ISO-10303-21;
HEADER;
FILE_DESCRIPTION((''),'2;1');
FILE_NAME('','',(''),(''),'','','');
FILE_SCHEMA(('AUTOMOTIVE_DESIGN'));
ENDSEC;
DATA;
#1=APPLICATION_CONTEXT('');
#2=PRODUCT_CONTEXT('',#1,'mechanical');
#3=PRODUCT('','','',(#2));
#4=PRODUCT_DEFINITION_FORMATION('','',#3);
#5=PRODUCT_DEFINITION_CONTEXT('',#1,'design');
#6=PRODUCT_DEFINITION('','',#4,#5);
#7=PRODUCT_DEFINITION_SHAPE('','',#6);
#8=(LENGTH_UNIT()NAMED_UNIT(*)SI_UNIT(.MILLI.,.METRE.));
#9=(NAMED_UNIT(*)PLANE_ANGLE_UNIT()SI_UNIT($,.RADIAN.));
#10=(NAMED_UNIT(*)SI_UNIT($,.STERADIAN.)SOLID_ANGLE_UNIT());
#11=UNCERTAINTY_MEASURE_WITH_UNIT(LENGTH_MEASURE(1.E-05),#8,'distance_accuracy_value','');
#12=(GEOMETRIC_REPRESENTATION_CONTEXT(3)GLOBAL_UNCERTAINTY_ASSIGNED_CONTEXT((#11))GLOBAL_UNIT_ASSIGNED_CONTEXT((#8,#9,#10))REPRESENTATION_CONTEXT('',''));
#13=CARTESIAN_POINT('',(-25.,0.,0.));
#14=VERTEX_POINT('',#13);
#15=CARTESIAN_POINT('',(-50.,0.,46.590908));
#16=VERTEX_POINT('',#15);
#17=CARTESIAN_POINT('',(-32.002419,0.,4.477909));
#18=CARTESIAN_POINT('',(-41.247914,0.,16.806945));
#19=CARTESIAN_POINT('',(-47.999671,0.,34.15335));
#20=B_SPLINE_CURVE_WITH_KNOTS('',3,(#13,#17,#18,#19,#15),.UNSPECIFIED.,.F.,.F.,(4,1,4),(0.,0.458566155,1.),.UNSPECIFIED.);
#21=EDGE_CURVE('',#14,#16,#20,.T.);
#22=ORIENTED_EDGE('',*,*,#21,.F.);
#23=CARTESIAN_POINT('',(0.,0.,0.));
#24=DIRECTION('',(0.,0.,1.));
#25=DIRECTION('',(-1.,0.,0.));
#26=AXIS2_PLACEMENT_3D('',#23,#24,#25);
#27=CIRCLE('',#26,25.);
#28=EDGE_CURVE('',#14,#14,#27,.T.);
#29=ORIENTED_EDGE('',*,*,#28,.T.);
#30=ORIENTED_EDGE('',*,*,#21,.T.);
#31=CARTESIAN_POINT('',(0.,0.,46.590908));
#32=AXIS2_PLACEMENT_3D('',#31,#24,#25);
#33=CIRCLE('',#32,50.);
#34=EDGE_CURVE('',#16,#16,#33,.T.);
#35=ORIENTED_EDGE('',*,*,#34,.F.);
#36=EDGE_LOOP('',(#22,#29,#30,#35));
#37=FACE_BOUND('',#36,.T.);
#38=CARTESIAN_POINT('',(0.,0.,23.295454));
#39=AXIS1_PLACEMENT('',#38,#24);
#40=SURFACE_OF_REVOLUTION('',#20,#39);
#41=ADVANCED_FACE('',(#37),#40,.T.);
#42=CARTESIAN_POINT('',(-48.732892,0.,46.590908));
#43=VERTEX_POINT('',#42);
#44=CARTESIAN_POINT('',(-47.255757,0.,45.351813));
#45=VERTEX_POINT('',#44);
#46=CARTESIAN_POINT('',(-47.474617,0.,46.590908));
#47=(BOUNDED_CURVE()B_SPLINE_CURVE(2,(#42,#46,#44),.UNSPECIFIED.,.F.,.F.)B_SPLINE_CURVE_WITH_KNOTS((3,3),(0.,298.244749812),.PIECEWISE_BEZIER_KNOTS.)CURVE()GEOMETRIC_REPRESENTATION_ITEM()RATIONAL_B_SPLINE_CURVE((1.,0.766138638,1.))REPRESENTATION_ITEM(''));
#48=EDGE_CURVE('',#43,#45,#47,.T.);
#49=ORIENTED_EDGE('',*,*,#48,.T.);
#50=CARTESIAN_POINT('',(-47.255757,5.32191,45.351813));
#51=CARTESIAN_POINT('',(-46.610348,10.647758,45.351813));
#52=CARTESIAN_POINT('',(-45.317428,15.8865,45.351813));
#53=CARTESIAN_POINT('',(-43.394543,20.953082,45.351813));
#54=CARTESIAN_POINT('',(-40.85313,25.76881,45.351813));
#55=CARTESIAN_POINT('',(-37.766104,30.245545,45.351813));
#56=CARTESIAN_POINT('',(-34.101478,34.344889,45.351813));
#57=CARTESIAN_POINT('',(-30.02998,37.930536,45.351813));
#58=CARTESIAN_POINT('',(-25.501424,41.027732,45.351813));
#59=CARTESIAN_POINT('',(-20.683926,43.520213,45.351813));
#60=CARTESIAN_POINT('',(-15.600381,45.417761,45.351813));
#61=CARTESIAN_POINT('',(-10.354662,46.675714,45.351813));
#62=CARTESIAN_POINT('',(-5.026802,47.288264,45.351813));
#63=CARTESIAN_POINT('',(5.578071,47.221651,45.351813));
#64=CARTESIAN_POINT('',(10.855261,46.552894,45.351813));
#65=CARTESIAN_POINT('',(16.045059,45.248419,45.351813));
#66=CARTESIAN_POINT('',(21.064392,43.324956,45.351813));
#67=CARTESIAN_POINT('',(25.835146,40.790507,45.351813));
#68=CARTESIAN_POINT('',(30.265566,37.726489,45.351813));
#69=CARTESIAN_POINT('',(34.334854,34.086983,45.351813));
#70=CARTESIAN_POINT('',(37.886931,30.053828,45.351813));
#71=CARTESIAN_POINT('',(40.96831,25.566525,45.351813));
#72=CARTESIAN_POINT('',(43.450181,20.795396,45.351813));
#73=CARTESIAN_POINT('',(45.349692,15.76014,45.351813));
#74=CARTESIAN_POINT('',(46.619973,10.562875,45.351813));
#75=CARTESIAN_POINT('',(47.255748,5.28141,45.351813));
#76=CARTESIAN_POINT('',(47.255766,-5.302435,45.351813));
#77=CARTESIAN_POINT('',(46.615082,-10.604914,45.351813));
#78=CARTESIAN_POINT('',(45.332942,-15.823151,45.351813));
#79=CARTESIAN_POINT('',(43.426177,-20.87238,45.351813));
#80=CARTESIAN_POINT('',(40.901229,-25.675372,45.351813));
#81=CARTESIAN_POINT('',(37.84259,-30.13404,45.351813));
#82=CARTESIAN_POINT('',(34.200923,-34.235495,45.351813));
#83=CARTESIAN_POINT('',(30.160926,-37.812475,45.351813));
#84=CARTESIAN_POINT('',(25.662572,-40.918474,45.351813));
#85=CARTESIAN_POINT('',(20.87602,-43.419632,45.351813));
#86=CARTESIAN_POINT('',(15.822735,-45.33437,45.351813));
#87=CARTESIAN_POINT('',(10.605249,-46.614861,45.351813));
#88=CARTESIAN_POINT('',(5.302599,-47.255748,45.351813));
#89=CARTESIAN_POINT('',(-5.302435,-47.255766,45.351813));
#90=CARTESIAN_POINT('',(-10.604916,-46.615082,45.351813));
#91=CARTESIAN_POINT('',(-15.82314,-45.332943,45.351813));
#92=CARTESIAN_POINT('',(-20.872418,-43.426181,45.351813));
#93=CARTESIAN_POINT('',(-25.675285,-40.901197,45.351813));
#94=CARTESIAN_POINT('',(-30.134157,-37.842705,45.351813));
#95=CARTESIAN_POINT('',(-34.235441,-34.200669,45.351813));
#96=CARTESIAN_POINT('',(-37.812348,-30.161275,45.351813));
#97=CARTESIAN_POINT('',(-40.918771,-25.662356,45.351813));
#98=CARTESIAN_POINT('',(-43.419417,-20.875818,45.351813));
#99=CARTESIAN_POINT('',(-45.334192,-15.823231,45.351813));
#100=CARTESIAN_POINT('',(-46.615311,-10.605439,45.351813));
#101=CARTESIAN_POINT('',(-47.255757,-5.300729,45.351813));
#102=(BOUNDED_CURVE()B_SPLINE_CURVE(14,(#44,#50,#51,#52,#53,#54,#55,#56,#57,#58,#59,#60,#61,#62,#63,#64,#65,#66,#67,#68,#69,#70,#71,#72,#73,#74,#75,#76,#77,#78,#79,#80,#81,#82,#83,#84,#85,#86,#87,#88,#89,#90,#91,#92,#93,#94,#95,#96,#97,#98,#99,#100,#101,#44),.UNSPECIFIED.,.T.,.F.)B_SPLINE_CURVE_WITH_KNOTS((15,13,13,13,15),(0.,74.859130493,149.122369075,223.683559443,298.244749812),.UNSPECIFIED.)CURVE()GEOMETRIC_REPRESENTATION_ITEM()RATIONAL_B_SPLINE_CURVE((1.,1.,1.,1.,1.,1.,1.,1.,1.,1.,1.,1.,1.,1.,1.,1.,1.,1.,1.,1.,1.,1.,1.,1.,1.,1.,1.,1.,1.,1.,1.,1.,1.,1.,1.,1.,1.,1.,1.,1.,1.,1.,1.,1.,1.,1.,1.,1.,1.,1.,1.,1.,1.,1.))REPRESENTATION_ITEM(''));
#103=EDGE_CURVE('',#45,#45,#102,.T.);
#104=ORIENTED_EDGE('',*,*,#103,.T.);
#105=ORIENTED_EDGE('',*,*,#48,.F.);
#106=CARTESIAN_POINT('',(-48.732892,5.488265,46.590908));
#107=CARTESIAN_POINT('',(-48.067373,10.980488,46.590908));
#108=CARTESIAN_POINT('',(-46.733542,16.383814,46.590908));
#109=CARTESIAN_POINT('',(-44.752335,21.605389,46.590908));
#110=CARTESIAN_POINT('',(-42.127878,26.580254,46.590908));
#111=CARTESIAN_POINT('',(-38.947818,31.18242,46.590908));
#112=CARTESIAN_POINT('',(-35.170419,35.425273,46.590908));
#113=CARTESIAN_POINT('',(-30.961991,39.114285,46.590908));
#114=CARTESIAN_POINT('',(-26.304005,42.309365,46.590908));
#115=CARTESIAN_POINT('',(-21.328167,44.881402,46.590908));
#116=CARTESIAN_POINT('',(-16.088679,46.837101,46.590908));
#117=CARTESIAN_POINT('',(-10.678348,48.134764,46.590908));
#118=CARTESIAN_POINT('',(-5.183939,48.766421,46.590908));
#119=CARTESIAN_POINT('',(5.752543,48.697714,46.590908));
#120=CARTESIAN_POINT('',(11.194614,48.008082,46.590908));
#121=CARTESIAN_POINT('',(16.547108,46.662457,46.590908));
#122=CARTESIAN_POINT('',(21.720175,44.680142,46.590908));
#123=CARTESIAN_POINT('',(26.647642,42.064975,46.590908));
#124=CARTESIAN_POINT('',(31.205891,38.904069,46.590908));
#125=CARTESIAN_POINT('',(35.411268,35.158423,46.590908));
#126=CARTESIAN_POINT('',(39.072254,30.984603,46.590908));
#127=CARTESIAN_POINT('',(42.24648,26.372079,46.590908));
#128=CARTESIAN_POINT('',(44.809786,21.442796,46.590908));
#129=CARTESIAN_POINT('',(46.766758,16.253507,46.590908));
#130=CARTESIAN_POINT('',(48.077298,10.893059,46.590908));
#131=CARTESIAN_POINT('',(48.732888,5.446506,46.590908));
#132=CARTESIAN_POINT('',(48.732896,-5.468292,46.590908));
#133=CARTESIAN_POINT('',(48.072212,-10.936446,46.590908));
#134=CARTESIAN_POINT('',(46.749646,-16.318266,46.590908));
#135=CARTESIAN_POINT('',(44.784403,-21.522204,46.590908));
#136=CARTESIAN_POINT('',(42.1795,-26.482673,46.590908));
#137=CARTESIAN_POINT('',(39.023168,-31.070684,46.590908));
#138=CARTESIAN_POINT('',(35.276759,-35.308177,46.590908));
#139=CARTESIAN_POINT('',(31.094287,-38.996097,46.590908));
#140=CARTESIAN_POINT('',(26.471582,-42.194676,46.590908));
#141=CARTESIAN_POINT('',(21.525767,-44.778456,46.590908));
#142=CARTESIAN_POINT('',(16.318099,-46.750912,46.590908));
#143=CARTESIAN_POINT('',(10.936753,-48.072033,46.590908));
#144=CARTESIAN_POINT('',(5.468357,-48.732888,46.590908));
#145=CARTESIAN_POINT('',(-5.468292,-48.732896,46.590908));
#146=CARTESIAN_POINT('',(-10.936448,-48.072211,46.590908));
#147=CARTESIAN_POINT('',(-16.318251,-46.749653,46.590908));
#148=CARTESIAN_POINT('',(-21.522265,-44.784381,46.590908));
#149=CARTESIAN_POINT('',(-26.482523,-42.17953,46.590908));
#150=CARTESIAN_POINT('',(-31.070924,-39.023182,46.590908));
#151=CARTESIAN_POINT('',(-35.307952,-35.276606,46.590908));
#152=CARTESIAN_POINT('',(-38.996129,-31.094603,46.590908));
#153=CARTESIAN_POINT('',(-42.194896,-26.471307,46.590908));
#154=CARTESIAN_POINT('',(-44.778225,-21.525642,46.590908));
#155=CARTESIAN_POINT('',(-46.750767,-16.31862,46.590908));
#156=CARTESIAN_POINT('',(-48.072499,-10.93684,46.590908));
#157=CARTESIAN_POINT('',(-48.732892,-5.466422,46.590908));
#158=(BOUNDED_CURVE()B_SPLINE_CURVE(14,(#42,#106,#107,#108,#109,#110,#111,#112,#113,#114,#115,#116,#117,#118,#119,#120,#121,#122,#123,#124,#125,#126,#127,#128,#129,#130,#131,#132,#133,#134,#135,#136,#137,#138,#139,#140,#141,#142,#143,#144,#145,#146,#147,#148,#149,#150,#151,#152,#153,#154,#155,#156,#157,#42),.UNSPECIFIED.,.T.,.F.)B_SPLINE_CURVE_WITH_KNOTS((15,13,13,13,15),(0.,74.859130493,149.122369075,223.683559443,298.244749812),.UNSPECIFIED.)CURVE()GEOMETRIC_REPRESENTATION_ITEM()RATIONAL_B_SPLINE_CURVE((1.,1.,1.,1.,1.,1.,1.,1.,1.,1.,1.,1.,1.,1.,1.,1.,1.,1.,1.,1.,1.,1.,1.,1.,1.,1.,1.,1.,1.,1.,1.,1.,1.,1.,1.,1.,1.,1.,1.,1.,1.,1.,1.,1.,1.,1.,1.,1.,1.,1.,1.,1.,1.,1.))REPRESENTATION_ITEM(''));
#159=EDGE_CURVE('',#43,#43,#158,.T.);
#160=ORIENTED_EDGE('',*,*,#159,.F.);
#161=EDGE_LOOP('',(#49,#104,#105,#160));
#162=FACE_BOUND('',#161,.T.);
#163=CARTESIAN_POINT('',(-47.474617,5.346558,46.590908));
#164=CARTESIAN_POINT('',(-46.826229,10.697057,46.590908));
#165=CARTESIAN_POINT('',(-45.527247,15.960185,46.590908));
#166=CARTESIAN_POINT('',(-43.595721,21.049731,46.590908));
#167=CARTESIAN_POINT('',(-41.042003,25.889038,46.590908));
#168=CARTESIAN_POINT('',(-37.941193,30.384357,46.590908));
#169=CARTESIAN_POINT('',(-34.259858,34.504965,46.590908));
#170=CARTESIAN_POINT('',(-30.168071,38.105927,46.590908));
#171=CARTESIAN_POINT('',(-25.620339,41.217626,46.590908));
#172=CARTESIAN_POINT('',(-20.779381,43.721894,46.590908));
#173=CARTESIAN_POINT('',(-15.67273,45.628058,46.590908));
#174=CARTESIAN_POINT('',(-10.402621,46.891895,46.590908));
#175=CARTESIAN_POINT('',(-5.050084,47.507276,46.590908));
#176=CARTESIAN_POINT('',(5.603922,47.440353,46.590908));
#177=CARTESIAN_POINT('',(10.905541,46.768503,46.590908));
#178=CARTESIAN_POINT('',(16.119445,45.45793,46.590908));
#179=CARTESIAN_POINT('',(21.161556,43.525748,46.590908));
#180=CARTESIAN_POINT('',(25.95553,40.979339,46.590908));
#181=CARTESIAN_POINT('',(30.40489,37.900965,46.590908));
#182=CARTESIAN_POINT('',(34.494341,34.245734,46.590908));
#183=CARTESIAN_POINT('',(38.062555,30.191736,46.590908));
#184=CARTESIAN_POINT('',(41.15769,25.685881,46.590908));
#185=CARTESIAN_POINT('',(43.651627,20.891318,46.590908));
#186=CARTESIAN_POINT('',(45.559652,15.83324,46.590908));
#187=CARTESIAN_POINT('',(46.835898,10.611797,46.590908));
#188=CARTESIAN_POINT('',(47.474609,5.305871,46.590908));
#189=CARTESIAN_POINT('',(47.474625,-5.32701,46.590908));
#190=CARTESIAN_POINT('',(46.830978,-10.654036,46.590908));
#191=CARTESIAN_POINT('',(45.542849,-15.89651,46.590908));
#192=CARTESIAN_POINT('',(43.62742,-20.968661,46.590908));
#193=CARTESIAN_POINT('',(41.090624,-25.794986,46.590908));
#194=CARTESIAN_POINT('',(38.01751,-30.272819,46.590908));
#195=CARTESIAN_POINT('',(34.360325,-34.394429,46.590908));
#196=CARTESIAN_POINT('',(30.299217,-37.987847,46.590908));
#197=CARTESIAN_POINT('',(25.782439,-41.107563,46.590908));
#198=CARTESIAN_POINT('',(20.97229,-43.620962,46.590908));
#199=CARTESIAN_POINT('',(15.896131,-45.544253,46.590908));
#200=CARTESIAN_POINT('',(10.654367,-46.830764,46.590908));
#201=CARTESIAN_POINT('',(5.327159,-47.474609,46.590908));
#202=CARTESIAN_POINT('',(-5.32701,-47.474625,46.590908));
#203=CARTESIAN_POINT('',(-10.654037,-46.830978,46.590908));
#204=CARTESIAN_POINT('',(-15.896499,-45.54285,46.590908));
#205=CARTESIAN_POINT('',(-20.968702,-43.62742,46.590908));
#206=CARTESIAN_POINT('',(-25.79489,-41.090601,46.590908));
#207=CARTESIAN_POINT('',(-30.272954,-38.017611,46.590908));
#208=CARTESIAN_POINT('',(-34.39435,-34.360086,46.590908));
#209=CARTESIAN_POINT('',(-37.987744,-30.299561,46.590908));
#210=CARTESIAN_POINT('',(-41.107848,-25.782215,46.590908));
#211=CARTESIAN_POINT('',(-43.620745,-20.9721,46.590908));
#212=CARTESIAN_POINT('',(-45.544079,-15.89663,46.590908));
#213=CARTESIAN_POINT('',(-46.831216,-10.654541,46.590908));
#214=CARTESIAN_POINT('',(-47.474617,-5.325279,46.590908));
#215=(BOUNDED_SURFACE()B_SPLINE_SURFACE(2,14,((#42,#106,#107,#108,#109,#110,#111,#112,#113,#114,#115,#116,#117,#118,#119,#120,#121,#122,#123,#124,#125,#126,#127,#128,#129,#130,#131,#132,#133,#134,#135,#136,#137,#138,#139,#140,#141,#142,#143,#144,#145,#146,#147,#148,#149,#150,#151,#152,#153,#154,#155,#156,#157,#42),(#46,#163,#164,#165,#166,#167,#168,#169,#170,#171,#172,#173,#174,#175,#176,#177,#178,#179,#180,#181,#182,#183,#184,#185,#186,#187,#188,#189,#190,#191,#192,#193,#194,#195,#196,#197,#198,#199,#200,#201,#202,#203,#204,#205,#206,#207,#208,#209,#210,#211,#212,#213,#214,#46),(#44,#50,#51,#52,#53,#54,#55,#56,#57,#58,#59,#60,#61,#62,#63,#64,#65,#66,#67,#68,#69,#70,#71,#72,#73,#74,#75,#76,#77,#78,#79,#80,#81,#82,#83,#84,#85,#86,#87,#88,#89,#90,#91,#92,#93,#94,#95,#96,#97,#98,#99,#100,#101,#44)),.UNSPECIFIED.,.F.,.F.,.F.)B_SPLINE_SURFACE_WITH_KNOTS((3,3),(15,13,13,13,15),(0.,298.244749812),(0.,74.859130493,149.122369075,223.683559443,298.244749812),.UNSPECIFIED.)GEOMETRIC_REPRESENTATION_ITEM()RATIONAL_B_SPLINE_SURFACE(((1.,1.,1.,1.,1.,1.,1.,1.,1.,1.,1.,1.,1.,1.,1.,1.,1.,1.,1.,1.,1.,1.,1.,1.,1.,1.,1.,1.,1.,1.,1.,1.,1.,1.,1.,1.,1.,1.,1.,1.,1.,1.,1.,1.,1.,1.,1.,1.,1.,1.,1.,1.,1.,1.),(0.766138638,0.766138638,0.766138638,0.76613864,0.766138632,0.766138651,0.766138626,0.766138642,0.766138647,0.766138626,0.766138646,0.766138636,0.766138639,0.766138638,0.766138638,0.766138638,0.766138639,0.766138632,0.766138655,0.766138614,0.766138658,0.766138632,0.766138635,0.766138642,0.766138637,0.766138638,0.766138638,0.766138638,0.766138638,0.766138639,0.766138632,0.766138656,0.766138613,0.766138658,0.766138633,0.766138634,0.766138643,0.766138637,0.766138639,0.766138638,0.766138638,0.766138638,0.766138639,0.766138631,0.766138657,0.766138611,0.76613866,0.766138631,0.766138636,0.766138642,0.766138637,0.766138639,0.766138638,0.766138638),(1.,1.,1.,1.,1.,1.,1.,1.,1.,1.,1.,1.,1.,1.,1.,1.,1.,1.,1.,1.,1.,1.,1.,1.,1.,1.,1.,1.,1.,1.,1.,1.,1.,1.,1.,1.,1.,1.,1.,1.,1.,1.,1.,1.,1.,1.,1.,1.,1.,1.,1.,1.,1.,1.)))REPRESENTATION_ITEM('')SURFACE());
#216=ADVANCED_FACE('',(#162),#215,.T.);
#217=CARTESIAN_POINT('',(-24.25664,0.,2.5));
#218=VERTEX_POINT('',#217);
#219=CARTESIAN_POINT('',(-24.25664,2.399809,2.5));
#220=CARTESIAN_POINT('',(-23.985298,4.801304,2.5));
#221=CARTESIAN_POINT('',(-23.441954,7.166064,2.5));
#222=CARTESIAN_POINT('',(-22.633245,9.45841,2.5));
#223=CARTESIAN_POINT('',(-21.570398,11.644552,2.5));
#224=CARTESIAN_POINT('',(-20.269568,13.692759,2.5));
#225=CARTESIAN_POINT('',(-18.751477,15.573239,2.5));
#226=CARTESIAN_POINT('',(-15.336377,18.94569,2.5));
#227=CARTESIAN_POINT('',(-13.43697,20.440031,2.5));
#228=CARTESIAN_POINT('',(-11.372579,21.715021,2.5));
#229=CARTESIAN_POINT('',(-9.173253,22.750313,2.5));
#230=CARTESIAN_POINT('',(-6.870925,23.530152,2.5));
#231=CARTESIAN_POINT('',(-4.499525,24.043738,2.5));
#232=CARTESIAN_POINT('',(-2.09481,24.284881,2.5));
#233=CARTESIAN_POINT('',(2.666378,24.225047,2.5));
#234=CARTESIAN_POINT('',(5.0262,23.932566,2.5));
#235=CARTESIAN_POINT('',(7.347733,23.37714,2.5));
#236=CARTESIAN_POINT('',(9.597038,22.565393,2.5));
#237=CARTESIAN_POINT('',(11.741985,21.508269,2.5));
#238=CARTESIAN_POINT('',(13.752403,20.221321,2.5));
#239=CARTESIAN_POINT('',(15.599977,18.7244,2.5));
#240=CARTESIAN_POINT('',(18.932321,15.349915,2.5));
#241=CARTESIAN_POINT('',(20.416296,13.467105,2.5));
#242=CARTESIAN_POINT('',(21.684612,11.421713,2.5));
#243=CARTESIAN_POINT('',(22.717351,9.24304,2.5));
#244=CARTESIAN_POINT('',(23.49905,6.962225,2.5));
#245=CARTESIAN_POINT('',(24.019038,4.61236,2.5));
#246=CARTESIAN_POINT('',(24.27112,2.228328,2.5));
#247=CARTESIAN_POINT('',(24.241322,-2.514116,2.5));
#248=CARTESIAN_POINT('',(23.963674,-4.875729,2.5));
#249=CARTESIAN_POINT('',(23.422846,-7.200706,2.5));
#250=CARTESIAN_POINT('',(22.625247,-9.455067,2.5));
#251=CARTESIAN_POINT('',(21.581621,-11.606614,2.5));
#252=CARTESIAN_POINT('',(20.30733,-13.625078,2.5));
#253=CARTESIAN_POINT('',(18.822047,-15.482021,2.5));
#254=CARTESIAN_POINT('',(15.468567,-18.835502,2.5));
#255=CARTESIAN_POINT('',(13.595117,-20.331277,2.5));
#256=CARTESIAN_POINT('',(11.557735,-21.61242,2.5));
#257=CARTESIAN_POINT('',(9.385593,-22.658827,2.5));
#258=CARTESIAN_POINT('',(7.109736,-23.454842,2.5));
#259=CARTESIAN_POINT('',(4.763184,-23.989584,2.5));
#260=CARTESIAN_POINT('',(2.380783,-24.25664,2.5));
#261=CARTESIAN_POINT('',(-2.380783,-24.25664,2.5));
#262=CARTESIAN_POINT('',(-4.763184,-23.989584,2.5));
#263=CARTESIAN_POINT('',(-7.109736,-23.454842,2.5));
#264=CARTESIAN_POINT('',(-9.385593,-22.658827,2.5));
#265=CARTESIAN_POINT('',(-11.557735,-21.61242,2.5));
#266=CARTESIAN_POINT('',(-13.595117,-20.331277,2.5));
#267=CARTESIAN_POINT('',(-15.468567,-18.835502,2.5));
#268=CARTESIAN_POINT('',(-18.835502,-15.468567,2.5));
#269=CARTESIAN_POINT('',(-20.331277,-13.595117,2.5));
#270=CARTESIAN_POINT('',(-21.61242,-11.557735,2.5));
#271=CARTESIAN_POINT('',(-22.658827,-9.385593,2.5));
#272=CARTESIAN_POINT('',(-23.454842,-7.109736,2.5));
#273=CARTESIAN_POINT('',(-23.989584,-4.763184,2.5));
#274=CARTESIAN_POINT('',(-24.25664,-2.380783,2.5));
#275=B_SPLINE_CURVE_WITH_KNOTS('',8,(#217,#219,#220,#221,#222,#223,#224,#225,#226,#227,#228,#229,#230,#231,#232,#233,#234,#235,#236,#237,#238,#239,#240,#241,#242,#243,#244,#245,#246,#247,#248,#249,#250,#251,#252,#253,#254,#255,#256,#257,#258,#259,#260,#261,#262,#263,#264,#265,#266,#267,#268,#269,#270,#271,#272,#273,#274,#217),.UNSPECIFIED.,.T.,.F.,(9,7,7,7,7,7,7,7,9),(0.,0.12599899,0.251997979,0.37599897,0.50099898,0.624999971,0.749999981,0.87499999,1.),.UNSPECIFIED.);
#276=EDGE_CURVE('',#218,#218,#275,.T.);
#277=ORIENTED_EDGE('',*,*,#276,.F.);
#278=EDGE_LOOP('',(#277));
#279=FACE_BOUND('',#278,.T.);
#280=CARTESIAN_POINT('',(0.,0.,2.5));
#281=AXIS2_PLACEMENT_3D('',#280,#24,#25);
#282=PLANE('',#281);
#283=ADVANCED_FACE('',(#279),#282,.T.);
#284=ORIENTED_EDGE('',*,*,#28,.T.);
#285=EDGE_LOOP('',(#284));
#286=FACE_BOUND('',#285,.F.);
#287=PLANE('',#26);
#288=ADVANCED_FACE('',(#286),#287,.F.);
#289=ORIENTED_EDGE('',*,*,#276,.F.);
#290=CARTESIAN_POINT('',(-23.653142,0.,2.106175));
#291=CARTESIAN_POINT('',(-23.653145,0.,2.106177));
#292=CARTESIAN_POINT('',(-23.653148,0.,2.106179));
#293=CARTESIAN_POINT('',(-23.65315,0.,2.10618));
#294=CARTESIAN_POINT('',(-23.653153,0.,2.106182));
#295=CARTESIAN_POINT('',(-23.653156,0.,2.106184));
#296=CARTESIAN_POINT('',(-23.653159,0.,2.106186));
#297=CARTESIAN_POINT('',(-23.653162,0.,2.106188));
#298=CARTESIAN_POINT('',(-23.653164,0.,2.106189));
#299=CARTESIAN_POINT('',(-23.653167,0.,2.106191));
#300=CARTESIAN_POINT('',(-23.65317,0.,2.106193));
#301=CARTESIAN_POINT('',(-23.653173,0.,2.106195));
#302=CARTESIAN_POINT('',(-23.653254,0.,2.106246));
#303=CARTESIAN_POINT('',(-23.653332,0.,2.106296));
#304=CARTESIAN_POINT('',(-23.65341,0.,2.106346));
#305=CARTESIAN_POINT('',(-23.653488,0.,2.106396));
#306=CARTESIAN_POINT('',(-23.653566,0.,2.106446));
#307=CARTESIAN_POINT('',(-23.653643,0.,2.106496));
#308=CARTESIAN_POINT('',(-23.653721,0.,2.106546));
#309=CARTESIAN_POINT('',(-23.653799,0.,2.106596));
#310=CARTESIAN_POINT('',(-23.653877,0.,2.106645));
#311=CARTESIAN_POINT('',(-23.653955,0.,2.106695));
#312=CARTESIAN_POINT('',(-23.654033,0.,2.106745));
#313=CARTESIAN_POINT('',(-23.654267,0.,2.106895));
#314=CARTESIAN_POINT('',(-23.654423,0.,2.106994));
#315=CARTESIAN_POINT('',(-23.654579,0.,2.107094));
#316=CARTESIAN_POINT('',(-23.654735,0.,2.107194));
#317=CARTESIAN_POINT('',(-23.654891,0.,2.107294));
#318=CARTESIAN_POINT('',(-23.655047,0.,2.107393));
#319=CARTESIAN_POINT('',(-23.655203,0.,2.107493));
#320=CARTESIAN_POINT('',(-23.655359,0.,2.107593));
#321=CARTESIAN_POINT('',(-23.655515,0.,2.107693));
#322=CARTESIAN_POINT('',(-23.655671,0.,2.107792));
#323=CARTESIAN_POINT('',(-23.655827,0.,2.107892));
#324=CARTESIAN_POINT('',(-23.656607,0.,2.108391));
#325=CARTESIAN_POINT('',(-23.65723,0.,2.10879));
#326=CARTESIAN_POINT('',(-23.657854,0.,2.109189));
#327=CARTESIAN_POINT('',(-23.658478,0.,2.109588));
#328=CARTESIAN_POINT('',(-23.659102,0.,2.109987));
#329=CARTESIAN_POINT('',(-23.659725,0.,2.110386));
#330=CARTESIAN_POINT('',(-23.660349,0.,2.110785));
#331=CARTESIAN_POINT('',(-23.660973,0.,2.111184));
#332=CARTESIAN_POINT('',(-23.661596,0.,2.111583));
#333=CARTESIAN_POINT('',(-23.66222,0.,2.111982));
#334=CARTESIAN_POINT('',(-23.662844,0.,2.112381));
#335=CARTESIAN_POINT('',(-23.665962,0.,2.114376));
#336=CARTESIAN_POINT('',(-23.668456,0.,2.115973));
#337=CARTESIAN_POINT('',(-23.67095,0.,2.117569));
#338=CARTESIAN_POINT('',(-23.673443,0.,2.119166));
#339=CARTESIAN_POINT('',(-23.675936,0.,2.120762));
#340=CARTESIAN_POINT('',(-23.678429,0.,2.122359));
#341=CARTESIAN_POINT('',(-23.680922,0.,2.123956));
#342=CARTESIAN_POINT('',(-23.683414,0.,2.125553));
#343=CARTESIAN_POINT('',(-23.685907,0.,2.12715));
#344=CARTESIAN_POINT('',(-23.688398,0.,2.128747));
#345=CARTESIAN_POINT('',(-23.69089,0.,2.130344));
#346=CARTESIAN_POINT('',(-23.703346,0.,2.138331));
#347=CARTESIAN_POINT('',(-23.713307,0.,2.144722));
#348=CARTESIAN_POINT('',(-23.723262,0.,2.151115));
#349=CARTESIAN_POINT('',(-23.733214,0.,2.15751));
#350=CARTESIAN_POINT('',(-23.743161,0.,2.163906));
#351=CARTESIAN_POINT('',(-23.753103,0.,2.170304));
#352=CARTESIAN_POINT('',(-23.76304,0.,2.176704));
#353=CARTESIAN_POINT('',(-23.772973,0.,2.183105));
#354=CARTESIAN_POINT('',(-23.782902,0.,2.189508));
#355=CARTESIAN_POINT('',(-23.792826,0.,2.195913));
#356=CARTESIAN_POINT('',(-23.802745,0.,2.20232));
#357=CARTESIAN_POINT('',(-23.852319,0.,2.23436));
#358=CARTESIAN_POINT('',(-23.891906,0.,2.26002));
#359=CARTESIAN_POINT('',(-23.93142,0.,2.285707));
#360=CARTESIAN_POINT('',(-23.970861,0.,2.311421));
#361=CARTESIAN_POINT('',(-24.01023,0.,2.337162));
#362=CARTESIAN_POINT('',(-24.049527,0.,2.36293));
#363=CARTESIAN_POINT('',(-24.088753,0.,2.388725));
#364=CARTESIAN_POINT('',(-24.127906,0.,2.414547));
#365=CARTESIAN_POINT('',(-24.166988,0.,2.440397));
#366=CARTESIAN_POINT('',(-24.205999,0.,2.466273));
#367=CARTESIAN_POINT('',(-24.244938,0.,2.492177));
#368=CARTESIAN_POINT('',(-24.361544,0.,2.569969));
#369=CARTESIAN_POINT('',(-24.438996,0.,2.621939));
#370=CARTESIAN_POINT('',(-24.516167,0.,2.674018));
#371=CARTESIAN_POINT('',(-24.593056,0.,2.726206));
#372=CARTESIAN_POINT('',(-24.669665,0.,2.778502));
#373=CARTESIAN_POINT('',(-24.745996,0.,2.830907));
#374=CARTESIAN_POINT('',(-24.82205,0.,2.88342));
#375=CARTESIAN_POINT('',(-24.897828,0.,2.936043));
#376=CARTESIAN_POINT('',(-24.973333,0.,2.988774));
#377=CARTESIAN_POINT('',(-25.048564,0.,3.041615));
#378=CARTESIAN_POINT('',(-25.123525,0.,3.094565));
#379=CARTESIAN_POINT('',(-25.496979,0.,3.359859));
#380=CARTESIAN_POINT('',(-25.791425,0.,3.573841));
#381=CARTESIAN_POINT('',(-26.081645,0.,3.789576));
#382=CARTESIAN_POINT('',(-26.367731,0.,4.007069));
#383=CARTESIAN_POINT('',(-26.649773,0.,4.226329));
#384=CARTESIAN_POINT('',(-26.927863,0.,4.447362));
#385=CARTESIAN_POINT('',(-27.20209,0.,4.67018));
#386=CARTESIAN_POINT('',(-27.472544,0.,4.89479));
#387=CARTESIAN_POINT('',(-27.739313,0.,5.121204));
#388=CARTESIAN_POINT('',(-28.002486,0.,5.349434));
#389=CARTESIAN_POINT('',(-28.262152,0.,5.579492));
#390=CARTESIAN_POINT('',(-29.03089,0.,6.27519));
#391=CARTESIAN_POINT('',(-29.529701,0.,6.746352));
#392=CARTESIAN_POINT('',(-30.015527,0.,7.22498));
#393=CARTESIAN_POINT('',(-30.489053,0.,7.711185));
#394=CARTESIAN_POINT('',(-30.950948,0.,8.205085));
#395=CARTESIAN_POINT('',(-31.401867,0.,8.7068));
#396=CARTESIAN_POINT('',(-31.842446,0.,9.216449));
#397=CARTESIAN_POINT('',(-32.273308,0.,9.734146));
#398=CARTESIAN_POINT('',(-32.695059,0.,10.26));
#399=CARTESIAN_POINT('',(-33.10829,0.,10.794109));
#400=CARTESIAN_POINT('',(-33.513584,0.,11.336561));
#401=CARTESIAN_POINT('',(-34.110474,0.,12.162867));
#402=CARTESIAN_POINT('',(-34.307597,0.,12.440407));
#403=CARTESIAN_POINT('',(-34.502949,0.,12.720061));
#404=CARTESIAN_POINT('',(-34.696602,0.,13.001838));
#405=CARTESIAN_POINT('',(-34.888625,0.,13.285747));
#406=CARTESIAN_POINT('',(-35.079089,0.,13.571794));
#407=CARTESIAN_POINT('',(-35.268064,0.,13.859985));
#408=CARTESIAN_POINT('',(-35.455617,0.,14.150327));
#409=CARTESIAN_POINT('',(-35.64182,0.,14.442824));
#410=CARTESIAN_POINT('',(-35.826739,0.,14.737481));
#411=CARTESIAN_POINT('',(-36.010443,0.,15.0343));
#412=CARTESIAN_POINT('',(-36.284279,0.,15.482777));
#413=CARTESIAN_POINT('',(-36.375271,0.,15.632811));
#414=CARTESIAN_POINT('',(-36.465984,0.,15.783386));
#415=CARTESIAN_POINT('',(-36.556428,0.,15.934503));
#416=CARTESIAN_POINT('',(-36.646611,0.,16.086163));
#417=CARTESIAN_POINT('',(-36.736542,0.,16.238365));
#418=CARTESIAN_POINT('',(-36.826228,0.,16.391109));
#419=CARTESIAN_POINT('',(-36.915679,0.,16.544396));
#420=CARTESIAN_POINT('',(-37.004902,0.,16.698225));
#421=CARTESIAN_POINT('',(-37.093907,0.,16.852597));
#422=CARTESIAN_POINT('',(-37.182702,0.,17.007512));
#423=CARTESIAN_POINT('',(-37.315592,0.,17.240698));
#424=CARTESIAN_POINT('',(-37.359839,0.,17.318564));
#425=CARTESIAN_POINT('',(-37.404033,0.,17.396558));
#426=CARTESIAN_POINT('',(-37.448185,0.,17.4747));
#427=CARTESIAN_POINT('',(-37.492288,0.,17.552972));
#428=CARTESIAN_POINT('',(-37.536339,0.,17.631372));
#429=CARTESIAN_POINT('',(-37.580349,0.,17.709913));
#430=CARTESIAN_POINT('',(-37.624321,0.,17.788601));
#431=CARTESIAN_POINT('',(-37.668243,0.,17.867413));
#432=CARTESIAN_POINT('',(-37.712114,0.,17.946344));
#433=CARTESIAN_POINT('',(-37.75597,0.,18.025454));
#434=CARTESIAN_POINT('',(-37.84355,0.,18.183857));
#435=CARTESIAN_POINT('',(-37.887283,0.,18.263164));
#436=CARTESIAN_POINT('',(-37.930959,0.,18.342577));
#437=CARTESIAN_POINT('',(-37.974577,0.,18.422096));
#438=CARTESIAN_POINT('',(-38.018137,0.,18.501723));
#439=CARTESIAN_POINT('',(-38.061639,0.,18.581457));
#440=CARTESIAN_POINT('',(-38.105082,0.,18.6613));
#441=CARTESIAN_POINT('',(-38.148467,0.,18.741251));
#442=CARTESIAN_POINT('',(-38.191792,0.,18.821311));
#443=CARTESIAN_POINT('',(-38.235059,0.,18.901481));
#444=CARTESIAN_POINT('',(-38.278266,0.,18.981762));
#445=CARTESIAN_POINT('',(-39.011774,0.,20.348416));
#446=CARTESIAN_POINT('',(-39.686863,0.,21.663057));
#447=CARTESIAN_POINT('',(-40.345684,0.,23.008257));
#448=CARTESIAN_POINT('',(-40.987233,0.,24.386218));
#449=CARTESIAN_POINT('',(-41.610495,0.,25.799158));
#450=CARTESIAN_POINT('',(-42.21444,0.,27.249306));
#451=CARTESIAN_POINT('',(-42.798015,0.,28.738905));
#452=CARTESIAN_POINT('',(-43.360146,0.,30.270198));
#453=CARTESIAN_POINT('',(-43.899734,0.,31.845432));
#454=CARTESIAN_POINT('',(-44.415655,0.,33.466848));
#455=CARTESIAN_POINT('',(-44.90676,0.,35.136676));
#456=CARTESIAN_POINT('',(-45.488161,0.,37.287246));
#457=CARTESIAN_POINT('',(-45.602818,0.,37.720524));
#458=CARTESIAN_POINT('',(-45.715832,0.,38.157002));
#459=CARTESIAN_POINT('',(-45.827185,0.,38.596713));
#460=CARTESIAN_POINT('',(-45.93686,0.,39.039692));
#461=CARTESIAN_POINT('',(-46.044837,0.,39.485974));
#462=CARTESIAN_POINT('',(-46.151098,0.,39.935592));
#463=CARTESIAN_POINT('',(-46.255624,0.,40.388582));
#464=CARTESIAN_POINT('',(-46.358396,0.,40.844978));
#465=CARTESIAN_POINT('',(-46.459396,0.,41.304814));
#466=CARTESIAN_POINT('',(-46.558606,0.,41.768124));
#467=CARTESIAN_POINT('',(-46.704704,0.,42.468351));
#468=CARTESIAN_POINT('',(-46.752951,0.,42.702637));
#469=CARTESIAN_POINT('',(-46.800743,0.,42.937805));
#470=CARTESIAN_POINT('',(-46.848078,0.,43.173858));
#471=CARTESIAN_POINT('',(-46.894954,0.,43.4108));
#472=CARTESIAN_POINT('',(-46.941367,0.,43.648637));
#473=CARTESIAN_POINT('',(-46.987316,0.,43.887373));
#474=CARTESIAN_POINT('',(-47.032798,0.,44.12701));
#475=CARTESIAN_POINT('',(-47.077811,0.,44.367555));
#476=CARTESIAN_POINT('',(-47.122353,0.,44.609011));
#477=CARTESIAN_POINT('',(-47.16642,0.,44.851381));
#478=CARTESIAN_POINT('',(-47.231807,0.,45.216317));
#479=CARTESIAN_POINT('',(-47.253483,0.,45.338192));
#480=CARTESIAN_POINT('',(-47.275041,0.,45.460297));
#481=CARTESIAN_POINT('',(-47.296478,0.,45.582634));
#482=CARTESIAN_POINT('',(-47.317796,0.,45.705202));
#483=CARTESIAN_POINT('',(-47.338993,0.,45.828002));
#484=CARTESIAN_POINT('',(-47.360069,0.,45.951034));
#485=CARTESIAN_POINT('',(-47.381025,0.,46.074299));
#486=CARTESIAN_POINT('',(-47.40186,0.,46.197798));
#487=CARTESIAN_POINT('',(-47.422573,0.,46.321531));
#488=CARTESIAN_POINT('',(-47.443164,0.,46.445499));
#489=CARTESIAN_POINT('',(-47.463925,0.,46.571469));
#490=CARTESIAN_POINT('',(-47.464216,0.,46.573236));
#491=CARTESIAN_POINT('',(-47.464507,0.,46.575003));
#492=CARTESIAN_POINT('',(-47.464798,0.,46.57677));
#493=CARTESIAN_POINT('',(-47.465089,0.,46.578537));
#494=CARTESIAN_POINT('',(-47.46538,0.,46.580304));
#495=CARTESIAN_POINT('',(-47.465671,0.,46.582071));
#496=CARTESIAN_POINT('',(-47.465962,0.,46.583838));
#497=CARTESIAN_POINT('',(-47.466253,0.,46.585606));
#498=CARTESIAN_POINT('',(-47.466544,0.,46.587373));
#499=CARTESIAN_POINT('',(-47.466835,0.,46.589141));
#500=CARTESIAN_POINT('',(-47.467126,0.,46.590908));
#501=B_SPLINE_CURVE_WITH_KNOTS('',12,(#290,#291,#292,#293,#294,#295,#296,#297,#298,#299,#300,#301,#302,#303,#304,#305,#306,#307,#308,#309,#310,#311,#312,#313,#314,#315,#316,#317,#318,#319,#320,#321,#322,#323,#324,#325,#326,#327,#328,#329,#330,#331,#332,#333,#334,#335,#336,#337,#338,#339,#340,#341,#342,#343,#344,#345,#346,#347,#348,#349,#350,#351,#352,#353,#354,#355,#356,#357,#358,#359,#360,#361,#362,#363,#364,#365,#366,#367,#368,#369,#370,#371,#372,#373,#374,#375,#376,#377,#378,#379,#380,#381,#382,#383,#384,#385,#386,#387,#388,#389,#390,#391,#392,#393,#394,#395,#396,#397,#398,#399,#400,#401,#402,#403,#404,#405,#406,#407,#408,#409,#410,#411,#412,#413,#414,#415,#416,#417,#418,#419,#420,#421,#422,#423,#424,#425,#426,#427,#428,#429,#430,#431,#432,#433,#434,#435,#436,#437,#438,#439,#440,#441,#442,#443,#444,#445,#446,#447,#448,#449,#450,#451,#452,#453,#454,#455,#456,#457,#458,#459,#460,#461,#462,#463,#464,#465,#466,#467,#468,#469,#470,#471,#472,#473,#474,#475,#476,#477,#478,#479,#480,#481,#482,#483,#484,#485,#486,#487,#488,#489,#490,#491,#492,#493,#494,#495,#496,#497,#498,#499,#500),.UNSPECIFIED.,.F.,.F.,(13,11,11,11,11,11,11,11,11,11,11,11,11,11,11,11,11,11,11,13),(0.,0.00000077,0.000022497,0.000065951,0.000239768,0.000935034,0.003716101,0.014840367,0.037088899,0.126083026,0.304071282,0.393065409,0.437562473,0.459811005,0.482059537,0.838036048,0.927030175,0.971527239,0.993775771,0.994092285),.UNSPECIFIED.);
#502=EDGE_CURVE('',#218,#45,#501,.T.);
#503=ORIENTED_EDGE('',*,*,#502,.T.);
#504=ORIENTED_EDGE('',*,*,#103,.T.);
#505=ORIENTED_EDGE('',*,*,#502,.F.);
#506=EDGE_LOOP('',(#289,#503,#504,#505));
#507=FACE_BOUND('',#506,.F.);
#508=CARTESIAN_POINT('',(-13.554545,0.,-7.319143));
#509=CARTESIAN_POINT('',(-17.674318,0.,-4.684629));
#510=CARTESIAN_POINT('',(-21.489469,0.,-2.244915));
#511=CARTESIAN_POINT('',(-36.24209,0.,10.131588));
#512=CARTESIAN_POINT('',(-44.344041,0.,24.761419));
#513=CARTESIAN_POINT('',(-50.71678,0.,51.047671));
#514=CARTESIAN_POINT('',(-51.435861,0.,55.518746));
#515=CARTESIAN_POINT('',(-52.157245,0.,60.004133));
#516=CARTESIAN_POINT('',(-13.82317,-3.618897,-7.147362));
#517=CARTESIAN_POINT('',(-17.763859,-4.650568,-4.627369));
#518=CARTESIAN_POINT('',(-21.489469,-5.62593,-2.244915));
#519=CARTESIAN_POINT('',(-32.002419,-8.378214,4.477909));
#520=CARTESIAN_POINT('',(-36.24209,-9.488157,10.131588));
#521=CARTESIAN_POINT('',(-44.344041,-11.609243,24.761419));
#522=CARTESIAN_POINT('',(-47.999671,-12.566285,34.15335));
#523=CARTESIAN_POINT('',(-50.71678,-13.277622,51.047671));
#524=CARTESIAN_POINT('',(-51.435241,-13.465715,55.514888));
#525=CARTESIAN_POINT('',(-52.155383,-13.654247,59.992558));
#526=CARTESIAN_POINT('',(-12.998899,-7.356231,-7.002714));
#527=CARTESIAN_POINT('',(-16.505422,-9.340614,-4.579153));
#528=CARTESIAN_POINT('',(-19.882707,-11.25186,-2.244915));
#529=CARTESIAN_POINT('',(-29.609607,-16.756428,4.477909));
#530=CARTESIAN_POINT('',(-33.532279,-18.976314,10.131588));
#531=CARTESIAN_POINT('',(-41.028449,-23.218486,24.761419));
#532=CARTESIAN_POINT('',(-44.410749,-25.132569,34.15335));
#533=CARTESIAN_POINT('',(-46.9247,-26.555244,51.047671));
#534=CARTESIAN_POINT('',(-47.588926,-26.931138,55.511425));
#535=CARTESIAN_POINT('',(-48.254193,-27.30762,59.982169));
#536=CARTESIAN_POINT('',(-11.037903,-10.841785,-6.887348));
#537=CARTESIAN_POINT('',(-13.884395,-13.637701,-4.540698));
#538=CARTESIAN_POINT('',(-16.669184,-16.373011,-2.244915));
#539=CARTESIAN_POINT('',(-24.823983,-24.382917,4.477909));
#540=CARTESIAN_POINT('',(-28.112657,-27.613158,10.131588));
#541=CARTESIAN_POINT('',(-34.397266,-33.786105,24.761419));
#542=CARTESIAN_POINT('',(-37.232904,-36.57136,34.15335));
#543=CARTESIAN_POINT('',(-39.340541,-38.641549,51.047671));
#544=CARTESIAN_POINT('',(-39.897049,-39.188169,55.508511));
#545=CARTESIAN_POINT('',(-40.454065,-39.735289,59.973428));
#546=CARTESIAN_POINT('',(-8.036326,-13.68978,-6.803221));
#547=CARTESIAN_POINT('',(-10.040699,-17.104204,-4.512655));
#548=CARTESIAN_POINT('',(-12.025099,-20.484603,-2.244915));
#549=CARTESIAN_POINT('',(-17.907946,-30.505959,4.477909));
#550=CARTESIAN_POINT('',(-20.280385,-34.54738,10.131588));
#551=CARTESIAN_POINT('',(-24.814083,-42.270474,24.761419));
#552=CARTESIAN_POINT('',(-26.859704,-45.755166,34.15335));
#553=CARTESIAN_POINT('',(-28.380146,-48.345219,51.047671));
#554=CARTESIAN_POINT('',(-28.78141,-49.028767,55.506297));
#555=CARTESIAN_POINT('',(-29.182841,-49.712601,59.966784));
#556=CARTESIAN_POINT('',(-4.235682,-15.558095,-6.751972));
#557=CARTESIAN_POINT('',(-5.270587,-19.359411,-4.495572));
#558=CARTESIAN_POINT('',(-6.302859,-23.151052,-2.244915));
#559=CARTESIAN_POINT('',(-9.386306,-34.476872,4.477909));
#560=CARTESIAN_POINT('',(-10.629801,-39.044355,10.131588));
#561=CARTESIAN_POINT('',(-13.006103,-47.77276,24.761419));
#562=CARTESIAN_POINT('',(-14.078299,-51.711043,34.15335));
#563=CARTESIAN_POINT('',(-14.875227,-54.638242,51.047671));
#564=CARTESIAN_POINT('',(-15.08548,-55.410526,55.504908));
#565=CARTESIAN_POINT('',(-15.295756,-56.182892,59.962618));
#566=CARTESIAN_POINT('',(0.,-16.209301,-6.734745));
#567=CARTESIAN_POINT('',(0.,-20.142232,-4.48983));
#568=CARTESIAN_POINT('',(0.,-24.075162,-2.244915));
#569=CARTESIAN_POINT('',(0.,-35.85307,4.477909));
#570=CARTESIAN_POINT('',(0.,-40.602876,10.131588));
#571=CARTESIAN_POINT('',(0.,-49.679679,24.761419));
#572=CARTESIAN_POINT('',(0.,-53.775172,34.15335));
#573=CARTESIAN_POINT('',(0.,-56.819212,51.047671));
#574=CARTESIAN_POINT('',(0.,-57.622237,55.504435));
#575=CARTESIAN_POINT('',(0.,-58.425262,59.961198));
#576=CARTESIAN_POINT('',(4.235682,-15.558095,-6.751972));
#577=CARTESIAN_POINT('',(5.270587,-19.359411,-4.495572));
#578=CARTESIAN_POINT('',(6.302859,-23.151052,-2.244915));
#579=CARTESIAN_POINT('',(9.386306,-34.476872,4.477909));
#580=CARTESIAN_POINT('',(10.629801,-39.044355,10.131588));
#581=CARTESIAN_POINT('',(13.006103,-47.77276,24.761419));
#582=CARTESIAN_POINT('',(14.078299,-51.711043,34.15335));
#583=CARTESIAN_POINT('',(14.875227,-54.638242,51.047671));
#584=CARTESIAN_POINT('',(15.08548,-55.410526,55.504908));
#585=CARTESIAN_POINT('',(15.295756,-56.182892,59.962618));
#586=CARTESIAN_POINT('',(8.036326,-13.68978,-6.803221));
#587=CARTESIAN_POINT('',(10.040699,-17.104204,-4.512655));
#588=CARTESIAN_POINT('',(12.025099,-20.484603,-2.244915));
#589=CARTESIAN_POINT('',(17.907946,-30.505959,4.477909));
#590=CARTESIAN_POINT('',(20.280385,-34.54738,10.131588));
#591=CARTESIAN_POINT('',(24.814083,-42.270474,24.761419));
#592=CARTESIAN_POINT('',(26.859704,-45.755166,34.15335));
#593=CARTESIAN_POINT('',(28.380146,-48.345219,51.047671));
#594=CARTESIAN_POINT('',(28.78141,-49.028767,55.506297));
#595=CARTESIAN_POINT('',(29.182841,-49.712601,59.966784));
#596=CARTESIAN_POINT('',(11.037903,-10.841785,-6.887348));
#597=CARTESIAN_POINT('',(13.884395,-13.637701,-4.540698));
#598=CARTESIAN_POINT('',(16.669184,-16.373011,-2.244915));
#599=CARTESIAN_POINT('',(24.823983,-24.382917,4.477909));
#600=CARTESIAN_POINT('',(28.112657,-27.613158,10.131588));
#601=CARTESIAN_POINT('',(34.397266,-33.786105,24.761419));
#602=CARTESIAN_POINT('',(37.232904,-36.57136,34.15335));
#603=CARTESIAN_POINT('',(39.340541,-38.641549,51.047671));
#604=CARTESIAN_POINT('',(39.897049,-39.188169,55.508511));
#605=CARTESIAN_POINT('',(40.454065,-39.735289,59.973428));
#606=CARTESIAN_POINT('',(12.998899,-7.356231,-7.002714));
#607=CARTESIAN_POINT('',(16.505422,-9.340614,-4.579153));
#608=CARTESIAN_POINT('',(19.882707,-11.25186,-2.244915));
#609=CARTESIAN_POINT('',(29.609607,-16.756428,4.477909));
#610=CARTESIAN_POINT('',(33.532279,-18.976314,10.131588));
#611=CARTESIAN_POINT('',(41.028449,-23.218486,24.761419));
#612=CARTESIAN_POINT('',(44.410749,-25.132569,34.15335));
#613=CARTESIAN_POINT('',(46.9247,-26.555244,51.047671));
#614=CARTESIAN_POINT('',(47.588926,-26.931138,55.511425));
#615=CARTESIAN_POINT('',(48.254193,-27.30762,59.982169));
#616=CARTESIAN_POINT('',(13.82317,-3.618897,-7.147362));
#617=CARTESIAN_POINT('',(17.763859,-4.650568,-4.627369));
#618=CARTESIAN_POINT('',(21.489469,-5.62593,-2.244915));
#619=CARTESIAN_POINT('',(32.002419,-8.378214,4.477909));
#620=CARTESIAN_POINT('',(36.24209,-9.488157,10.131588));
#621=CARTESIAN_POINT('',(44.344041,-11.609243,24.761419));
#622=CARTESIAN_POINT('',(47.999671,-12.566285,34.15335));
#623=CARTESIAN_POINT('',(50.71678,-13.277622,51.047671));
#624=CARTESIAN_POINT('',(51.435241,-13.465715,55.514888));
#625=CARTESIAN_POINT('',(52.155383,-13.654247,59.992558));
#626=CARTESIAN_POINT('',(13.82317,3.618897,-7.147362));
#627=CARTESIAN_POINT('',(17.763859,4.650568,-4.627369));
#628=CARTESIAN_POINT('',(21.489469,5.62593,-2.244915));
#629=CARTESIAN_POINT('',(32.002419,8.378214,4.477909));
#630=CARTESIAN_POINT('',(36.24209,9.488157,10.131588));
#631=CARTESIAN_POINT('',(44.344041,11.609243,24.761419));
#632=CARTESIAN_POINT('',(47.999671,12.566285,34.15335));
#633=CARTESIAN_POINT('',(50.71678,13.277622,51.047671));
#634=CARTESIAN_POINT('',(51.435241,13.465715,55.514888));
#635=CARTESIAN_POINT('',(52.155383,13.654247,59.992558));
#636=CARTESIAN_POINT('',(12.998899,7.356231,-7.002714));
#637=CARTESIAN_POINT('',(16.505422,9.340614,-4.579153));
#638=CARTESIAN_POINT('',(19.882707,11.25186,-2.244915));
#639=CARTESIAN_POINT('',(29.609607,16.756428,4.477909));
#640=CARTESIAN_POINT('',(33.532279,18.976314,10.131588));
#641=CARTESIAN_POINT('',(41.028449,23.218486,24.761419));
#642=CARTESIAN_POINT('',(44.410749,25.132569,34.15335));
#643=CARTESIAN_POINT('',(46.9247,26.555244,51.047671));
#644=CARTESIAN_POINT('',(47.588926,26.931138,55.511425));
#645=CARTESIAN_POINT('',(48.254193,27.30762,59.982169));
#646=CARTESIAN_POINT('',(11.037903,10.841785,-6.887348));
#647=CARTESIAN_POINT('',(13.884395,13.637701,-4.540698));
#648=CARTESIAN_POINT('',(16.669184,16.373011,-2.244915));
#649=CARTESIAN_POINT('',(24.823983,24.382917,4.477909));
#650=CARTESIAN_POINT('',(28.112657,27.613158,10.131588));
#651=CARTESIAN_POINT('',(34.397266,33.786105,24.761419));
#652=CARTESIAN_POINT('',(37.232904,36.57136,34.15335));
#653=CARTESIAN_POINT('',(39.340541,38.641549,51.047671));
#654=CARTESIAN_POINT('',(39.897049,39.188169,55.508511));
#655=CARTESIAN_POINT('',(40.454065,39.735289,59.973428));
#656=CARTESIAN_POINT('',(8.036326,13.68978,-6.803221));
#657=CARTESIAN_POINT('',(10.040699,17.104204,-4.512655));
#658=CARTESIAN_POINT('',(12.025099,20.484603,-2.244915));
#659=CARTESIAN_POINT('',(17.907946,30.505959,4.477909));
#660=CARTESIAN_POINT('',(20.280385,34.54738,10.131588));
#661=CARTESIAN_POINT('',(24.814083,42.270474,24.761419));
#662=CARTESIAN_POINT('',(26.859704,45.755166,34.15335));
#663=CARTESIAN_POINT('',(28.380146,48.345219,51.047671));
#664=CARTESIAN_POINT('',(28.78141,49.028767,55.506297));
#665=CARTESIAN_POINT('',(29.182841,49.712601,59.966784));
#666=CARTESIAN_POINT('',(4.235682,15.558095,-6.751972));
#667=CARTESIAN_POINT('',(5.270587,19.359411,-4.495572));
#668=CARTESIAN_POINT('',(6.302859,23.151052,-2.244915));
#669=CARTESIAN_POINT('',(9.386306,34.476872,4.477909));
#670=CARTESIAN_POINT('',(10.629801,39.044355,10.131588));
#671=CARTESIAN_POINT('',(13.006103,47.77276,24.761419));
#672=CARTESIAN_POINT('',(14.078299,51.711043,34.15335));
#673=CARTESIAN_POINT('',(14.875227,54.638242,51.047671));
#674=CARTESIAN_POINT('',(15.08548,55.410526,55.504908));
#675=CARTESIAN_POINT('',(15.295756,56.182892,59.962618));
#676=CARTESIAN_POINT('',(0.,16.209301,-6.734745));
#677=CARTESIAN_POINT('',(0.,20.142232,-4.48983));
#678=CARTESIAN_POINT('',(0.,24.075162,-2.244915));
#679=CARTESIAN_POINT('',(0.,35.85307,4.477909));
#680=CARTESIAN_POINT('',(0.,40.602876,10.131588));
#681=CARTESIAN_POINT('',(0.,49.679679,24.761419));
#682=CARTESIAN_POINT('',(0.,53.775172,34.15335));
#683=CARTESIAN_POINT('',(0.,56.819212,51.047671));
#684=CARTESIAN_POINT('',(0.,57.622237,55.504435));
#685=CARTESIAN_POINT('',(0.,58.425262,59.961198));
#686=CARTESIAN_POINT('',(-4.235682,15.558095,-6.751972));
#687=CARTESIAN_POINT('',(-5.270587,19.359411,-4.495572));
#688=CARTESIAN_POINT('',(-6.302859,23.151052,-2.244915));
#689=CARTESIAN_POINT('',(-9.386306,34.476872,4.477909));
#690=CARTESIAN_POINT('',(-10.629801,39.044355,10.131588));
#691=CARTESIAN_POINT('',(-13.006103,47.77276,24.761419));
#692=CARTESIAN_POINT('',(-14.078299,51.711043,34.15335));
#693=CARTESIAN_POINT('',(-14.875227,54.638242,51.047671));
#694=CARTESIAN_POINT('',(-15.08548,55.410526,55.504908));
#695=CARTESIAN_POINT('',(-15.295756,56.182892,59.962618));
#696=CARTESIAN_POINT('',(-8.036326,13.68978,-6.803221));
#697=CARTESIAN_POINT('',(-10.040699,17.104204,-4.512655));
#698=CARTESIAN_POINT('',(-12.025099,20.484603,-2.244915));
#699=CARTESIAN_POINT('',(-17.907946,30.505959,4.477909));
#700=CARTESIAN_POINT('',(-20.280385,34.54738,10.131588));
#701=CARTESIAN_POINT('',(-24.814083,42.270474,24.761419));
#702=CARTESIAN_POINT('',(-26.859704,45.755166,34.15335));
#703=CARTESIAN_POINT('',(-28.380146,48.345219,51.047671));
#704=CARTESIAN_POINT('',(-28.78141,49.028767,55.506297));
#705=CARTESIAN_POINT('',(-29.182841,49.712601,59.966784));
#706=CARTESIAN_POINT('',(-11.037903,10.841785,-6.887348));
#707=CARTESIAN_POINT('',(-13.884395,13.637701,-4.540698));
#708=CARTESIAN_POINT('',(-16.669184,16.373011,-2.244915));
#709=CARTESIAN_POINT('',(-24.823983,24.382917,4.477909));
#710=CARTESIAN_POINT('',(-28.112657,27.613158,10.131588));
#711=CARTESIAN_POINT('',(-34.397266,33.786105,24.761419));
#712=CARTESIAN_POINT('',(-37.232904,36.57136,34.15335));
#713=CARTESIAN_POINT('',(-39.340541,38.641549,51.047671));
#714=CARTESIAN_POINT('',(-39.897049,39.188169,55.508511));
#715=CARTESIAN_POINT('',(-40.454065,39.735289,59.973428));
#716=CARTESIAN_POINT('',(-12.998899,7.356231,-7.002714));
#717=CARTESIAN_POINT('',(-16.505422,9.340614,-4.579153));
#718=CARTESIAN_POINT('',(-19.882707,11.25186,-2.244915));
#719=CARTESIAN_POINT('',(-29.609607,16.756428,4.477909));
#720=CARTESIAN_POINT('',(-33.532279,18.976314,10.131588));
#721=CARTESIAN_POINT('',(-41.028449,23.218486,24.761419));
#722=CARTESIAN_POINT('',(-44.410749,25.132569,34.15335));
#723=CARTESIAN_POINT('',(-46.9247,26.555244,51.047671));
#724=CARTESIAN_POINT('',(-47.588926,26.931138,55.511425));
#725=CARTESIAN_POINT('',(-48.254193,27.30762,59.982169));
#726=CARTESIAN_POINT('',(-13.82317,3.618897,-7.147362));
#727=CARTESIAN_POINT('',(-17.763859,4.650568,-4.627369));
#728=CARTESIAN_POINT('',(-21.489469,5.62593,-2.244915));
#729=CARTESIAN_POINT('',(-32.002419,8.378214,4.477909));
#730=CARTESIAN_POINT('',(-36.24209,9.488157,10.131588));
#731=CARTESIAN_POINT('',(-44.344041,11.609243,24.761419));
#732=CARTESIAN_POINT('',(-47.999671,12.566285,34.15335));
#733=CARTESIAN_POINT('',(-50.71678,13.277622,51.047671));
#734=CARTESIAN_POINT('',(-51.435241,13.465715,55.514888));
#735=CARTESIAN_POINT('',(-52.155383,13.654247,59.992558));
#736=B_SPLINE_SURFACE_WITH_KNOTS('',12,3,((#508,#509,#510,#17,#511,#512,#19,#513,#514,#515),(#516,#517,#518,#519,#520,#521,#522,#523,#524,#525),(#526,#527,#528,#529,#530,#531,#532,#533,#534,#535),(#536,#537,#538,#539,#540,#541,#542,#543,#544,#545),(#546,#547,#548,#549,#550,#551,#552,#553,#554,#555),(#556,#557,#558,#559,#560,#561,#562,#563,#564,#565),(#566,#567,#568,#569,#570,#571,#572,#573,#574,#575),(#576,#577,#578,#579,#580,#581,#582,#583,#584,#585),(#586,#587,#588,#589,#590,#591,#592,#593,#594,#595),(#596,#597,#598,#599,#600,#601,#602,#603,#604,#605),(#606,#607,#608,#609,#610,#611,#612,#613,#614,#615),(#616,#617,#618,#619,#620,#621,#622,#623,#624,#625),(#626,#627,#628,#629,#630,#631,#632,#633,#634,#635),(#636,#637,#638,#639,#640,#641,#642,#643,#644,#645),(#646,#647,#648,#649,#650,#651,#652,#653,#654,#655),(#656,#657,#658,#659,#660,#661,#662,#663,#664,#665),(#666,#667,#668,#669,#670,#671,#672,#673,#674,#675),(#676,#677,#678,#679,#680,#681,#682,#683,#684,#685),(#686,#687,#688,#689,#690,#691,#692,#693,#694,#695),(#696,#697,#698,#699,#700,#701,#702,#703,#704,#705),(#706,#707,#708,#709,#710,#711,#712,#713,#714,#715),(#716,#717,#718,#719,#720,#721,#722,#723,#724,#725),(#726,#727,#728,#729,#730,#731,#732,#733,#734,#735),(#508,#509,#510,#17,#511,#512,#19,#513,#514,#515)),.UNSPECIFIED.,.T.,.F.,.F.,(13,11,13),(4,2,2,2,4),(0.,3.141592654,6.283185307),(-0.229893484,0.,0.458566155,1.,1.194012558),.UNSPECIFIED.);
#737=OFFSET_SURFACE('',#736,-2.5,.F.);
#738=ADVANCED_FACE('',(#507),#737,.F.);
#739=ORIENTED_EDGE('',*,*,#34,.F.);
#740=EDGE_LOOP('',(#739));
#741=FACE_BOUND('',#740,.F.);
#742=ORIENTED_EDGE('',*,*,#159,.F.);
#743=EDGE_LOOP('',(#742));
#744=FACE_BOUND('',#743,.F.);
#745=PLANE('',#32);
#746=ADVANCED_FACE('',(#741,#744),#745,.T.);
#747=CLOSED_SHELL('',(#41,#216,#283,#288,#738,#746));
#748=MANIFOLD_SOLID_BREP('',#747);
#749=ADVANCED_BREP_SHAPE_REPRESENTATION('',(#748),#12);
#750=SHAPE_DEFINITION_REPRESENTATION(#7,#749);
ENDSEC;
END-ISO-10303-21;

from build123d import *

# Parameters (mm, degrees)
F2_T = -2.5
F3_R = 1.5


with BuildPart() as f1:
    # F0 (on Front) → F1 (revolve)
    with BuildSketch(Plane.XZ):
        with BuildLine():
            Line((-25, 0), (0, 0))
            Line((0, 0), (0, 46.5909080625))
            Line((0, 46.5909080625), (-50, 46.5909080625))
            add(Edge.make_bspline(
                [(-25, 0), (-32.0024192333, 4.4779088348), (-41.2479135414, 16.8069449168), (-47.999671412, 34.1533497409), (-50, 46.5909080625)],
                knots=[0, 0, 0, 0, 0.458566155, 1, 1, 1, 1], degree=3))
        make_face()
    revolve(axis=Axis((0, 0, 23.2954540313), (0, 0, 1)))

    # F2
    f2_openings = [f1.faces().sort_by_distance(p)[0] for p in [
        (0, 0, 46.590908),
    ]]
    offset(amount=F2_T, openings=f2_openings)

    # F3
    f3_edges = [f1.edges().sort_by_distance(p)[0] for p in [
        (47.467126, 0, 46.590908),
    ]]
    fillet(f3_edges, radius=F3_R)


solid = f1.part
